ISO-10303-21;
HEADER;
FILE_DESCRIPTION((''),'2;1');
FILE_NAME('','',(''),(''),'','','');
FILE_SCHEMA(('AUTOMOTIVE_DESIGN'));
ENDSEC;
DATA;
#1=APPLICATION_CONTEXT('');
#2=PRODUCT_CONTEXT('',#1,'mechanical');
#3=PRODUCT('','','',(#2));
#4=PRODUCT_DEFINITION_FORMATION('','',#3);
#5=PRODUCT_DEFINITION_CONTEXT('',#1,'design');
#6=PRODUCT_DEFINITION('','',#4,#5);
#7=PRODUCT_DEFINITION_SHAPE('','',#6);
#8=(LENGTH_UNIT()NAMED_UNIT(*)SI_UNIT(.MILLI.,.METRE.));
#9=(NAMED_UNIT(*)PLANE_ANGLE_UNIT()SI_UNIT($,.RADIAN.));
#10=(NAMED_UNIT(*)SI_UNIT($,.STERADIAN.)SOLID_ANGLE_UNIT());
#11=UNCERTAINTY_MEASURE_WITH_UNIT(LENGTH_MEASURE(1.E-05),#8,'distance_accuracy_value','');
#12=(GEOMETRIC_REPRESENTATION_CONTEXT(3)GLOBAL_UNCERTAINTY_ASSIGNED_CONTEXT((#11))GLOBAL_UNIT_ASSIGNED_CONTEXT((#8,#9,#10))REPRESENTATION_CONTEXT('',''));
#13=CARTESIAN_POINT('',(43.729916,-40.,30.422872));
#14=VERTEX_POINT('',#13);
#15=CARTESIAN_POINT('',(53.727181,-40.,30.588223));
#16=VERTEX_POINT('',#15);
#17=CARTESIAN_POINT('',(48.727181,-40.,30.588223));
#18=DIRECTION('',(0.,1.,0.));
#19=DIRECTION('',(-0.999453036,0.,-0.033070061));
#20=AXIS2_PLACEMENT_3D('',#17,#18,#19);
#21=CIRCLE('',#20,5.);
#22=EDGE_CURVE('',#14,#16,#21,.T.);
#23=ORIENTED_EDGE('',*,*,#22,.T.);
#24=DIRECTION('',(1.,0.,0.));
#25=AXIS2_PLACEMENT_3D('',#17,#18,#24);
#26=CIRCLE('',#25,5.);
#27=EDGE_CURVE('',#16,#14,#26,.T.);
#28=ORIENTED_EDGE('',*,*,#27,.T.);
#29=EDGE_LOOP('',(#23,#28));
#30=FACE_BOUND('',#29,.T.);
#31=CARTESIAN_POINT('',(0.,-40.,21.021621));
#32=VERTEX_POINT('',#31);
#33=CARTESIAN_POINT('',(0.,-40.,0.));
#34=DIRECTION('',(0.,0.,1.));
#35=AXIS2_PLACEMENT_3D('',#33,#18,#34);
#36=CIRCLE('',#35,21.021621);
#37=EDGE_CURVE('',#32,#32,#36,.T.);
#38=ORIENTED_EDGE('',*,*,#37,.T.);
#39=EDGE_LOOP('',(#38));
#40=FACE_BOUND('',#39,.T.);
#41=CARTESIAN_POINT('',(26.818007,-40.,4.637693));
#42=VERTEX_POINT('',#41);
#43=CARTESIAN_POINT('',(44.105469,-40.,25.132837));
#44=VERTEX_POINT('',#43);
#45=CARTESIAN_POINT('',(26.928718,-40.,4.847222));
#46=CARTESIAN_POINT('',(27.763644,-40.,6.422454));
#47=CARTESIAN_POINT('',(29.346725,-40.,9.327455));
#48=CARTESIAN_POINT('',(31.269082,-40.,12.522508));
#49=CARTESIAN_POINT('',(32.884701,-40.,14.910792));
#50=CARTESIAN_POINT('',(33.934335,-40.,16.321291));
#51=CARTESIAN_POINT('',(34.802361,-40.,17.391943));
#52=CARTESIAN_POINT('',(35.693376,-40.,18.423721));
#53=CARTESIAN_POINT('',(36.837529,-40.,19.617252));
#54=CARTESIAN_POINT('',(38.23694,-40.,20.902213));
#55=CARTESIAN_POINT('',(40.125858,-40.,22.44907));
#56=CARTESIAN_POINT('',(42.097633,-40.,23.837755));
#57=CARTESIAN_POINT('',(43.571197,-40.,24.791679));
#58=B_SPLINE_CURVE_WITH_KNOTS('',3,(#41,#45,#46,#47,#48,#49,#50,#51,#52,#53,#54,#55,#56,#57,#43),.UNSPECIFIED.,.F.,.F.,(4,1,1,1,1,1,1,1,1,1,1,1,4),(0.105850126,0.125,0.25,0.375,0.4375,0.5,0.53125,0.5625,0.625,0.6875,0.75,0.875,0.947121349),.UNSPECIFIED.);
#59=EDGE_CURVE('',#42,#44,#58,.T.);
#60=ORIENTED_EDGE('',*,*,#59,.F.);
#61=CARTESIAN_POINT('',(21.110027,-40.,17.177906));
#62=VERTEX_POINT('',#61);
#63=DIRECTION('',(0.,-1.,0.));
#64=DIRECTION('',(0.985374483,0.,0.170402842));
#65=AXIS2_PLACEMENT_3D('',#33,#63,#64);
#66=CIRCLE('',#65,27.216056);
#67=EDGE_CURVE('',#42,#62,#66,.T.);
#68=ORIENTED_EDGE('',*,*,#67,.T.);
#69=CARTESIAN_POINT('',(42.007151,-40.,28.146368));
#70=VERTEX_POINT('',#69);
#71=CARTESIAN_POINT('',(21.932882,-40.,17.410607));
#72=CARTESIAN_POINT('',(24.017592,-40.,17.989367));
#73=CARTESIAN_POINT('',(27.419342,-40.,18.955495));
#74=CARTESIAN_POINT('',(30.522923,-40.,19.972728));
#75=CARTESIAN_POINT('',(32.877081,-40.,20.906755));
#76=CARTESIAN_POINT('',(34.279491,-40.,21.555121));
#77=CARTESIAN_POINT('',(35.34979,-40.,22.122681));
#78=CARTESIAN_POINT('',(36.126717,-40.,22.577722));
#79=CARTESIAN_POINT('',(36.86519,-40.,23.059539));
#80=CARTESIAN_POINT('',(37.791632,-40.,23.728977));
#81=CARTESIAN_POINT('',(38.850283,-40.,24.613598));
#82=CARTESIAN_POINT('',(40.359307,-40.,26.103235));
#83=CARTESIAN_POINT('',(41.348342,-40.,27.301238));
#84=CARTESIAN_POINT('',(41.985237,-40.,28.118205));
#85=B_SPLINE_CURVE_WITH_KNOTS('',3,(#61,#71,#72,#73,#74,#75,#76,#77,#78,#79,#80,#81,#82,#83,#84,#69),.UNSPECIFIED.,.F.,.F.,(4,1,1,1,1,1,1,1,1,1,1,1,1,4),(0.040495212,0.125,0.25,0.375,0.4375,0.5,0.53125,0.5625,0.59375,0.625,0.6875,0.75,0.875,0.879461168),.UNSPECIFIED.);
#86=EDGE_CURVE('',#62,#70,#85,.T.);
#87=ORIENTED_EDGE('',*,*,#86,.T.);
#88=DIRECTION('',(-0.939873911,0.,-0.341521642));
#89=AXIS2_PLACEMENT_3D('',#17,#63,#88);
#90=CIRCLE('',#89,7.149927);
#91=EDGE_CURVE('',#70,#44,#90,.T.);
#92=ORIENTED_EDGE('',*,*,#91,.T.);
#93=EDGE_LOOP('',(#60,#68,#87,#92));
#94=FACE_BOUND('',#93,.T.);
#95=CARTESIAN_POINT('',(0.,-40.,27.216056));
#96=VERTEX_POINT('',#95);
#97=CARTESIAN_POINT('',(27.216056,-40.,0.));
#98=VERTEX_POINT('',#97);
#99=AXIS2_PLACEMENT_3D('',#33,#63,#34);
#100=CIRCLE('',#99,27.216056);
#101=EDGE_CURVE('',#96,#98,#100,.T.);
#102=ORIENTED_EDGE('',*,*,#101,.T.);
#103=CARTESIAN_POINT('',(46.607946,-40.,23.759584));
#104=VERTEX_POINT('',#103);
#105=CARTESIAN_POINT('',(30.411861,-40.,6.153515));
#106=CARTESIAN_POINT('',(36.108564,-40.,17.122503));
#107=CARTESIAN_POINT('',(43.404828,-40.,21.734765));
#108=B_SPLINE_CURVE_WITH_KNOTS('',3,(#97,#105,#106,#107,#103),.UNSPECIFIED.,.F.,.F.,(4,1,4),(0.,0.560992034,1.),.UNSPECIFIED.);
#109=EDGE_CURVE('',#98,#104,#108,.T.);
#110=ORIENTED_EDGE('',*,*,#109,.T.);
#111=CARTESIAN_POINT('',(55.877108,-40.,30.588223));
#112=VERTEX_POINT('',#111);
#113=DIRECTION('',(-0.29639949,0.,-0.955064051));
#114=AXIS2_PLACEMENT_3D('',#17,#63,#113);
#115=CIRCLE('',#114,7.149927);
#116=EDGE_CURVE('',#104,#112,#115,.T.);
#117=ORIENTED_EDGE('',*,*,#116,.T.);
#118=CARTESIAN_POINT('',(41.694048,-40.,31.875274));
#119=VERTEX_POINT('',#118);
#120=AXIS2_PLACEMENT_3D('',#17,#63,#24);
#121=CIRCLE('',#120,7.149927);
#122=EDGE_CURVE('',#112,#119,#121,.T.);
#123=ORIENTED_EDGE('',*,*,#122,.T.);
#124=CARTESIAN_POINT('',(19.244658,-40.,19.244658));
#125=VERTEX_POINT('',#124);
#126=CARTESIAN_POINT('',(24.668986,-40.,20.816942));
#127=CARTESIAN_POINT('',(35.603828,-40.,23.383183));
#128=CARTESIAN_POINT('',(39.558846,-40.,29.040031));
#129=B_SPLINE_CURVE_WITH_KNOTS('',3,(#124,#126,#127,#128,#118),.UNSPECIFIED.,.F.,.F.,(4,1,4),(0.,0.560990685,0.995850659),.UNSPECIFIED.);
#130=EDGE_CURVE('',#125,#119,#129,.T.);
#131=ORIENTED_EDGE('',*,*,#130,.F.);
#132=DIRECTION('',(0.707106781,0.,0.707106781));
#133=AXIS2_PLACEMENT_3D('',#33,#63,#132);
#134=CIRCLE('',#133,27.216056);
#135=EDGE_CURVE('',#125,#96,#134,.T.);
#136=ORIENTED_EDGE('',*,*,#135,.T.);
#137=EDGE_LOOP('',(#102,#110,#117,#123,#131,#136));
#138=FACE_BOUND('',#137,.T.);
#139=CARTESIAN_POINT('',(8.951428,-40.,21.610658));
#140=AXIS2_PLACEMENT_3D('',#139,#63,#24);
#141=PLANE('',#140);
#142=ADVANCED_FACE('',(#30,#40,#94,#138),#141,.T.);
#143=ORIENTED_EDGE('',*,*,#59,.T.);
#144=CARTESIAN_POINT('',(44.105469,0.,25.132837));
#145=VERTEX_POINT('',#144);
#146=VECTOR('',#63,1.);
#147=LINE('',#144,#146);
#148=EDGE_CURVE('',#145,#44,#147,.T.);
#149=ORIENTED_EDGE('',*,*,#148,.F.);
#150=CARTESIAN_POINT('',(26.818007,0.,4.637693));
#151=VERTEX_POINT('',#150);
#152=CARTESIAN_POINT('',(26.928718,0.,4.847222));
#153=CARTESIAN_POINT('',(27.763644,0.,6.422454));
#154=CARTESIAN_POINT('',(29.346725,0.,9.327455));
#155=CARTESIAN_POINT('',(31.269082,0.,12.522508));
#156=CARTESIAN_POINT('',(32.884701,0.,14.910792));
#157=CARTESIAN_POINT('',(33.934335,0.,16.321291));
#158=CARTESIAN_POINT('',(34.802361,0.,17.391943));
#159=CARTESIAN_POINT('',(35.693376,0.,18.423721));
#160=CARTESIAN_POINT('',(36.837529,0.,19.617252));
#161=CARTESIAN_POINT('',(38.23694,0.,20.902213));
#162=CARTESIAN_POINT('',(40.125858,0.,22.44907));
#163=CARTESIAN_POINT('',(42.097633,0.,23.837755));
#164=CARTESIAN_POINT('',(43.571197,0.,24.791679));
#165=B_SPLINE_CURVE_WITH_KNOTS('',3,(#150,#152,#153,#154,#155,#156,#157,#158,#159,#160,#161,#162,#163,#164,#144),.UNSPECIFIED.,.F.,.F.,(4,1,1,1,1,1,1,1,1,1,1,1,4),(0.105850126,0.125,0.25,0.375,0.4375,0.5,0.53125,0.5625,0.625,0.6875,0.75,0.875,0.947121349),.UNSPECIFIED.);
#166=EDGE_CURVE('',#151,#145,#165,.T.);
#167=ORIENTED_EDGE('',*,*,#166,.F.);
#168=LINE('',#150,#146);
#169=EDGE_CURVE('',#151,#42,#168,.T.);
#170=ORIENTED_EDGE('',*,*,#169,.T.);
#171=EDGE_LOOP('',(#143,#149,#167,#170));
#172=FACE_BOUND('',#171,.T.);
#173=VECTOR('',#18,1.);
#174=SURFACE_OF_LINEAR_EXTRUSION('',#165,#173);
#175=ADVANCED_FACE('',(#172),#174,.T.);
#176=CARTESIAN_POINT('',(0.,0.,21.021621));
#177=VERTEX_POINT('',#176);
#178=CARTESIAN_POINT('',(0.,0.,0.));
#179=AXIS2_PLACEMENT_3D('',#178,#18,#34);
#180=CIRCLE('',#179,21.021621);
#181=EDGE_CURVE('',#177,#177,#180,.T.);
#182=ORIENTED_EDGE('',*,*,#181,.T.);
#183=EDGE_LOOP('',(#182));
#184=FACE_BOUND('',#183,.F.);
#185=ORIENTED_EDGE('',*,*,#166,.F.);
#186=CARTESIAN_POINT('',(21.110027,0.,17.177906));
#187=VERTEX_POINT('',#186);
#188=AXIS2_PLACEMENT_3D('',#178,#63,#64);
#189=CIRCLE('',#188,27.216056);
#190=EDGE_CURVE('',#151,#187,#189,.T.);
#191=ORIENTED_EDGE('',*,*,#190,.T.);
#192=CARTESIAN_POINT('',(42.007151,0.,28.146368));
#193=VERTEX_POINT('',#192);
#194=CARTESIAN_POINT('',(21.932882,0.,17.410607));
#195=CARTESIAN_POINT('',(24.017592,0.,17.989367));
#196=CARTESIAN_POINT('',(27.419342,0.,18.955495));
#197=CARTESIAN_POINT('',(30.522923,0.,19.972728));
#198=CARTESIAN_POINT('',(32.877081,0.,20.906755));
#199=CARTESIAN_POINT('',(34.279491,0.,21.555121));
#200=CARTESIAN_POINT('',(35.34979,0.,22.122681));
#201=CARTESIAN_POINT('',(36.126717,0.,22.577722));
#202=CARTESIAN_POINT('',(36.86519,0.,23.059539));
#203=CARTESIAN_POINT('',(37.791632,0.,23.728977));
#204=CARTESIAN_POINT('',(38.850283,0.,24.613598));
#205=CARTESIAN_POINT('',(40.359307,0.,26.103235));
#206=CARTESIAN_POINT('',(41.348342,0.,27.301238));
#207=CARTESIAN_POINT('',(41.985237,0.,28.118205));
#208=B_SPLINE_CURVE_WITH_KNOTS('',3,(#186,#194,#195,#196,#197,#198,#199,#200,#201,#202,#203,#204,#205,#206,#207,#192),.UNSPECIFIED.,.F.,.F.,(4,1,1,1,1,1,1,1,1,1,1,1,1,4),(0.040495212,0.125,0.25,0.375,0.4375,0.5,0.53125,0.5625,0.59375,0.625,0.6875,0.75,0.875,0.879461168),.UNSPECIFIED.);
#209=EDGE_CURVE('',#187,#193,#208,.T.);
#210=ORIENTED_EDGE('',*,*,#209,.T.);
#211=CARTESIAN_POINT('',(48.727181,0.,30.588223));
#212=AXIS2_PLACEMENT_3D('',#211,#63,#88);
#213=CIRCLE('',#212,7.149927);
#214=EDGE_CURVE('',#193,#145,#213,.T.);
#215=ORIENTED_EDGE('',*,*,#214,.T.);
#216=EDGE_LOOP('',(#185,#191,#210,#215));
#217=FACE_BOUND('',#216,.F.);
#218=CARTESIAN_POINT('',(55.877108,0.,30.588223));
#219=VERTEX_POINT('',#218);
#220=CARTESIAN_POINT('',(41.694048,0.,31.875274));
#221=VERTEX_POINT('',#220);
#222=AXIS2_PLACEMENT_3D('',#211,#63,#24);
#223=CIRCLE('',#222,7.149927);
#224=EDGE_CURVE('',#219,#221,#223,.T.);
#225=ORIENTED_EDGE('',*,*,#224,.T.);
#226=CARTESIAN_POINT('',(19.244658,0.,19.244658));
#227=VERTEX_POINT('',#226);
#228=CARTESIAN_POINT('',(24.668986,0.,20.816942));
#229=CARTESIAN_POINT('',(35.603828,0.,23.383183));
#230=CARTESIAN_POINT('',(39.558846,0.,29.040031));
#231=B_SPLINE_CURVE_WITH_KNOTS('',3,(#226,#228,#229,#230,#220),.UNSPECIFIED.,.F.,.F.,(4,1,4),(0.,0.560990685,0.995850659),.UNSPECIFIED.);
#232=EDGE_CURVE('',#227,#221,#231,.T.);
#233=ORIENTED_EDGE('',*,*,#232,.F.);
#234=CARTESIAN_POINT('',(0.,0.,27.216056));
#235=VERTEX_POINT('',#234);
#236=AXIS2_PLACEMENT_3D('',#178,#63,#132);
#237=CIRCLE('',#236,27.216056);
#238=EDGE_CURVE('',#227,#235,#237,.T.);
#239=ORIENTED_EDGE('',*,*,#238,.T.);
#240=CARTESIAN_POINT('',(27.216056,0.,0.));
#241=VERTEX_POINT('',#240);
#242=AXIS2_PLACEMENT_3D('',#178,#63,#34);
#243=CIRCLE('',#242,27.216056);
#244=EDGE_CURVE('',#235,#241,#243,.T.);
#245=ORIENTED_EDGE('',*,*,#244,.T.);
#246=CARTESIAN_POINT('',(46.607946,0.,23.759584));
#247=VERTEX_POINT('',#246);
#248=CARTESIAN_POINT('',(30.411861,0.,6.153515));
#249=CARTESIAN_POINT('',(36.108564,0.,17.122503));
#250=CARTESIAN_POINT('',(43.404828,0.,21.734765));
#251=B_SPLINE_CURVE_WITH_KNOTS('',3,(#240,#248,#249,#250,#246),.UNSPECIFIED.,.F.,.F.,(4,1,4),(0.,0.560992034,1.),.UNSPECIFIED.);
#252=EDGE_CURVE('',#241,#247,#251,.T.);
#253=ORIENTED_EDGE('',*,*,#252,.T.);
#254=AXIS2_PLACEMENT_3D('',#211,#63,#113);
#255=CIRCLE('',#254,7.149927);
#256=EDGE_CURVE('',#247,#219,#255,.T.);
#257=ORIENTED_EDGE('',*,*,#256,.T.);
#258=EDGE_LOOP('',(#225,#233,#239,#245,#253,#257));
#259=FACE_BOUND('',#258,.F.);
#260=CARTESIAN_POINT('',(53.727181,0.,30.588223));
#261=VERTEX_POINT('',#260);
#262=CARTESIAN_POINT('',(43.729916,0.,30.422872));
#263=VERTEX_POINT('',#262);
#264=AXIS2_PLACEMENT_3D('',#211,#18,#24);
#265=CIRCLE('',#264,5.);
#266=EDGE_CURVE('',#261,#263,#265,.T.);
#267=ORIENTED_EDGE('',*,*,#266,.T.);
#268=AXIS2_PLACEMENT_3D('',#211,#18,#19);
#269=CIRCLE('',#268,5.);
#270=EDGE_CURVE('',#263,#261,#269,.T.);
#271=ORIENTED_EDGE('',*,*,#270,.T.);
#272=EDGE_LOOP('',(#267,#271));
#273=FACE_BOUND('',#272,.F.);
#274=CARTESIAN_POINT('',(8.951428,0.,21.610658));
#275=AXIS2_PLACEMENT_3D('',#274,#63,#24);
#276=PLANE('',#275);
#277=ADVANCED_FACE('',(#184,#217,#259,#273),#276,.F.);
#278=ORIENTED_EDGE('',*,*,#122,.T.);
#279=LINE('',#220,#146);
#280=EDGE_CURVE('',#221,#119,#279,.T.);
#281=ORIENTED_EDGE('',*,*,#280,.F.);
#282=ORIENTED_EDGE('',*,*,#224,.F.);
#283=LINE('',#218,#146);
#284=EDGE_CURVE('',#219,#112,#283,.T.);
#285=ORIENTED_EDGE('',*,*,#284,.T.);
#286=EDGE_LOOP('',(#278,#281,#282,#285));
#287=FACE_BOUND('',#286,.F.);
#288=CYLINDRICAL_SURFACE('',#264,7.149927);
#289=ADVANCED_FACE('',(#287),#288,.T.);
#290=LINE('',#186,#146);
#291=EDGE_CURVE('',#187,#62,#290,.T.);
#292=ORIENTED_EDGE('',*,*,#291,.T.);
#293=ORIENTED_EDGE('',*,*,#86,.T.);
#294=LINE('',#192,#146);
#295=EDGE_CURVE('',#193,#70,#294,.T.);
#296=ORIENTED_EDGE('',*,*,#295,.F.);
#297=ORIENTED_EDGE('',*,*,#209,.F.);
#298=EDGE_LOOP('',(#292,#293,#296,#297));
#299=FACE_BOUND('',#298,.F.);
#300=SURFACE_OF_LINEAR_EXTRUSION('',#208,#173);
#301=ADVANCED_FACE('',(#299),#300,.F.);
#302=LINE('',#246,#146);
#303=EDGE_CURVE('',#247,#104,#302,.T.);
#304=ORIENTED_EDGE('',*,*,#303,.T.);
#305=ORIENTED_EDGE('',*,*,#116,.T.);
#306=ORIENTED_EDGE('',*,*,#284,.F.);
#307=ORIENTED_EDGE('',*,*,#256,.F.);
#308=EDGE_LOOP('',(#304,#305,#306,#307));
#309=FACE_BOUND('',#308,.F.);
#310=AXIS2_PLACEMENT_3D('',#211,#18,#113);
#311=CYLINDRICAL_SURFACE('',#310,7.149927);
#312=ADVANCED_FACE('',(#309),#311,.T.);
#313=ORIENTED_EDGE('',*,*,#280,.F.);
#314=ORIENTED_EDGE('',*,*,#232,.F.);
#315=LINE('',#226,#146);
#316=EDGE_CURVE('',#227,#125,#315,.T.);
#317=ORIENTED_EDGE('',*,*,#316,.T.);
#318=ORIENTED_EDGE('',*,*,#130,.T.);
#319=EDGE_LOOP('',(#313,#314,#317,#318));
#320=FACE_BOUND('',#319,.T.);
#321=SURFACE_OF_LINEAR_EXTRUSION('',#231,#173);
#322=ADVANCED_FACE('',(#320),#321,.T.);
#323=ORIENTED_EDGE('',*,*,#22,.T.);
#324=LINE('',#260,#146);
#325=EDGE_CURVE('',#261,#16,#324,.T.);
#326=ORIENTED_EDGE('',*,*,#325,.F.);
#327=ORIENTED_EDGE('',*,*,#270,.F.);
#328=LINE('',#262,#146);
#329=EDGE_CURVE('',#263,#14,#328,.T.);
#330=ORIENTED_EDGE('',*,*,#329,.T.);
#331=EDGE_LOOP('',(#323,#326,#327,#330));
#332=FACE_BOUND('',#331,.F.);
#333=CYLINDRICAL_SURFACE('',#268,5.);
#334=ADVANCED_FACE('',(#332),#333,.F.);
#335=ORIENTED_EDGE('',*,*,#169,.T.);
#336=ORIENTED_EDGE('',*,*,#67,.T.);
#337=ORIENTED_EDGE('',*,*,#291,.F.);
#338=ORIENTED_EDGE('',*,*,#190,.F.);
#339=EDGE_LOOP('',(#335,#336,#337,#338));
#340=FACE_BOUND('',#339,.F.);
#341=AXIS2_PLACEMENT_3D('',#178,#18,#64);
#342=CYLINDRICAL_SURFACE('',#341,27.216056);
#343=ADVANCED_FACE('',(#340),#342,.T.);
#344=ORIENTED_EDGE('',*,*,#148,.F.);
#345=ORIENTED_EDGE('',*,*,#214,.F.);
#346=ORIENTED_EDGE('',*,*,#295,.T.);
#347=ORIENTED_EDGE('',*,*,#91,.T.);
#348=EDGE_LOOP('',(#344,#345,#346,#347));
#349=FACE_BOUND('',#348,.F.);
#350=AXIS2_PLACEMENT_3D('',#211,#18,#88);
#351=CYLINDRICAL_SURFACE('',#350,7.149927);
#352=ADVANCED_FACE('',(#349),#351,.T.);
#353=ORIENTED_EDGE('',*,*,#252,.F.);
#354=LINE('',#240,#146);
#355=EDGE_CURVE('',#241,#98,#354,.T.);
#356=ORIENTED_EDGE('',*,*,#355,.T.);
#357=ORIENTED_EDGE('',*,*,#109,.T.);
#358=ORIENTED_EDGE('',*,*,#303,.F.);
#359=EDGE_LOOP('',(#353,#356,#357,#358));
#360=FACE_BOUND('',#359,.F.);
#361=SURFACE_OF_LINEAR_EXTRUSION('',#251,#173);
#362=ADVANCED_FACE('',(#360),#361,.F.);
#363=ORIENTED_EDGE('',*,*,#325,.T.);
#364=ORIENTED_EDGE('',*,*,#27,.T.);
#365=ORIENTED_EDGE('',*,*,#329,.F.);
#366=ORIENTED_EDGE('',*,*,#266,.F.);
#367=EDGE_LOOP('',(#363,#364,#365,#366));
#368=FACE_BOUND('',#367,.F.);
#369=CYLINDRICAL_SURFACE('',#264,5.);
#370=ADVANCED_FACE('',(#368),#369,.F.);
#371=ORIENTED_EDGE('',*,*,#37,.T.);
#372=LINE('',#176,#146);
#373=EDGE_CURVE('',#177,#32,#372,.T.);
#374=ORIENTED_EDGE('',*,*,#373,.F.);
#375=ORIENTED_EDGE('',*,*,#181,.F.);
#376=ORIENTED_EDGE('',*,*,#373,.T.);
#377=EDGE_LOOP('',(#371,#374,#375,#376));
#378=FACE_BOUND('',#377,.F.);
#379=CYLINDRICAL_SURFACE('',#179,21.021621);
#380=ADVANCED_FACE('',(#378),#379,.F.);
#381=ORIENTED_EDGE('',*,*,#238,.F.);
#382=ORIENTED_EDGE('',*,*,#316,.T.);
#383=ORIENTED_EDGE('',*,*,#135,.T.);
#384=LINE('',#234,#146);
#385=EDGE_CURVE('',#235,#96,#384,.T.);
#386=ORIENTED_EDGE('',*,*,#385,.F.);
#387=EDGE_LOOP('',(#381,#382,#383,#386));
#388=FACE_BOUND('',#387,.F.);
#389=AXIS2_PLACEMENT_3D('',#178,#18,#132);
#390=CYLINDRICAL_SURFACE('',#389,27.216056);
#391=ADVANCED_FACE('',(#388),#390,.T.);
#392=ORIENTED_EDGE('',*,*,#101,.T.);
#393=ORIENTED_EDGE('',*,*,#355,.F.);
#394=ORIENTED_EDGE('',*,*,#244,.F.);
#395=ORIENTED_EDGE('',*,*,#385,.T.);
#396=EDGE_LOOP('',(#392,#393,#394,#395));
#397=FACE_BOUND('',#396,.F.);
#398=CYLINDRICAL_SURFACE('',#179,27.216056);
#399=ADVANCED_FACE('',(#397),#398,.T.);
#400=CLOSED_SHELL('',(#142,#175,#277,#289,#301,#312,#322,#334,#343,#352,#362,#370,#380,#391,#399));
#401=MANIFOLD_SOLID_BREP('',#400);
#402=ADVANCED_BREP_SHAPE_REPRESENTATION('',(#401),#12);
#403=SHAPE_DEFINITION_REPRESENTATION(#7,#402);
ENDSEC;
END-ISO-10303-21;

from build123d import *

# Parameters (mm, degrees)
F1_DEPTH = 40


# Not quite as in the source:
# - the dataset's text gives a spline's control points without its knots; the knots are read off the source's solid


with BuildPart() as f1:
    # F0 (on Front) → F1 (new body)
    with BuildSketch(Plane.XZ):
        with BuildLine():
            Line((14.8645307095, 14.8645307095), (19.2446576564, 19.2446576564))
            ThreePointArc((19.2446576564, 19.2446576564), (10.4151336723, 25.1443569656), (0, 27.2160558609))
            Line((0, 27.2160558609), (0, 21.0216209277))
            ThreePointArc((0, 21.0216209277), (8.0446260505, 19.4214453153), (14.8645307095, 14.8645307095))
        make_face()
        with BuildLine():
            add(Edge.make_bspline(
                [(19.2446576564, 19.2446576564), (24.6689861063, 20.8169419681), (35.6038275727, 23.3831834597), (39.5588464284, 29.0400313178), (41.6940481575, 31.8752741371)],
                knots=[0, 0, 0, 0, 0.5609906845, 0.9958506588, 0.9958506588, 0.9958506588, 0.9958506588], degree=3))
            ThreePointArc((19.2446576564, 19.2446576564), (20.2037869779, 18.2351498041), (21.1100269664, 17.1779061036))
            add(Edge.make_bspline(
                [(21.1100269664, 17.1779061036), (21.932882048, 17.4106073742), (24.0175916845, 17.9893669374), (27.419341518, 18.9554948799), (30.5229232771, 19.9727275496), (32.8770808493, 20.9067554384), (34.2794910559, 21.5551214884), (35.3497904598, 22.1226810179), (36.1267174841, 22.5777216487), (36.8651895753, 23.0595386993), (37.7916316161, 23.7289766273), (38.8502830375, 24.6135981903), (40.3593073263, 26.1032349307), (41.3483421725, 27.3012382121), (41.9852374937, 28.1182048261), (42.0071509342, 28.1463677389)],
                knots=[0.0404952119, 0.0404952119, 0.0404952119, 0.0404952119, 0.125, 0.25, 0.375, 0.4375, 0.5, 0.53125, 0.5625, 0.59375, 0.625, 0.6875, 0.75, 0.875, 0.8794611677, 0.8794611677, 0.8794611677, 0.8794611677], degree=3))
            ThreePointArc((42.0071509342, 28.1463677389), (41.602326035, 29.9899743097), (41.6940481575, 31.8752741371))
        make_face()
        with BuildLine():
            ThreePointArc((21.1100269664, 17.1779061036), (20.2037869779, 18.2351498041), (19.2446576564, 19.2446576564))
            Line((19.2446576564, 19.2446576564), (14.8645307095, 14.8645307095))
            ThreePointArc((14.8645307095, 14.8645307095), (19.4214453153, 8.0446260505), (21.0216209277, 0))
            Line((21.0216209277, 0), (27.2160558609, 0))
            ThreePointArc((27.2160558609, 0), (27.1163610427, 2.3273720003), (26.8180069698, 4.6376932618))
            ThreePointArc((26.8180069698, 4.6376932618), (24.7707154474, 11.2749879312), (21.1100269664, 17.1779061036))
        make_face()
        with BuildLine():
            Line((0, 21.0216209277), (0, 27.2160558609))
            ThreePointArc((0, 27.2160558609), (-19.2446576564, -19.2446576564), (27.2160558609, 0))
            Line((27.2160558609, 0), (21.0216209277, 0))
            ThreePointArc((21.0216209277, 0), (-14.8645307095, -14.8645307095), (0, 21.0216209277))
        make_face()
        with BuildLine():
            ThreePointArc((55.8771080393, 30.5882225912), (49.3733508957, 37.7088912623), (41.6940481575, 31.8752741371))
            ThreePointArc((41.6940481575, 31.8752741371), (41.602326035, 29.9899743097), (42.0071509342, 28.1463677389))
            ThreePointArc((42.0071509342, 28.1463677389), (42.8595475903, 26.5025969086), (44.1054687849, 25.1328367183))
            ThreePointArc((44.1054687849, 25.1328367183), (45.2874793483, 24.3200561007), (46.60794615, 23.7595842193))
            ThreePointArc((46.60794615, 23.7595842193), (52.9679994545, 24.8317552686), (55.8771080393, 30.5882225912))
        make_face()
        with BuildLine():
            ThreePointArc((53.7271809085, 30.5882225912), (48.8098673687, 25.588906343), (43.7299157288, 30.4228722856))
            ThreePointArc((43.7299157288, 30.4228722856), (48.6444944483, 35.5875388394), (53.7271809085, 30.5882225912))
        make_face(mode=Mode.SUBTRACT)
        with BuildLine():
            ThreePointArc((26.8180069698, 4.6376932618), (27.1163610427, 2.3273720003), (27.2160558609, 0))
            add(Edge.make_bspline(
                [(27.2160558609, 0), (30.4118613071, 6.1535153267), (36.1085642411, 17.1225033402), (43.4048284049, 21.734764605), (46.60794615, 23.7595842193)],
                knots=[0, 0, 0, 0, 0.5609920336, 1, 1, 1, 1], degree=3))
            ThreePointArc((46.60794615, 23.7595842193), (45.2874793483, 24.3200561007), (44.1054687849, 25.1328367183))
            add(Edge.make_bspline(
                [(26.8180069698, 4.6376932618), (26.9287178391, 4.8472219351), (27.763643844, 6.4224538826), (29.3467248011, 9.3274546207), (31.2690824478, 12.5225076847), (32.8847011617, 14.9107917128), (33.9343354718, 16.3212905579), (34.8023613487, 17.3919432452), (35.693376161, 18.4237208714), (36.8375292868, 19.6172523124), (38.236939936, 20.9022131544), (40.1258580525, 22.4490696098), (42.0976326485, 23.8377548069), (43.5711967417, 24.7916786126), (44.1054687849, 25.1328367183)],
                knots=[0.1058501262, 0.1058501262, 0.1058501262, 0.1058501262, 0.125, 0.25, 0.375, 0.4375, 0.5, 0.53125, 0.5625, 0.625, 0.6875, 0.75, 0.875, 0.9471213486, 0.9471213486, 0.9471213486, 0.9471213486], degree=3))
        make_face()
    extrude(amount=F1_DEPTH)


solid = f1.part
